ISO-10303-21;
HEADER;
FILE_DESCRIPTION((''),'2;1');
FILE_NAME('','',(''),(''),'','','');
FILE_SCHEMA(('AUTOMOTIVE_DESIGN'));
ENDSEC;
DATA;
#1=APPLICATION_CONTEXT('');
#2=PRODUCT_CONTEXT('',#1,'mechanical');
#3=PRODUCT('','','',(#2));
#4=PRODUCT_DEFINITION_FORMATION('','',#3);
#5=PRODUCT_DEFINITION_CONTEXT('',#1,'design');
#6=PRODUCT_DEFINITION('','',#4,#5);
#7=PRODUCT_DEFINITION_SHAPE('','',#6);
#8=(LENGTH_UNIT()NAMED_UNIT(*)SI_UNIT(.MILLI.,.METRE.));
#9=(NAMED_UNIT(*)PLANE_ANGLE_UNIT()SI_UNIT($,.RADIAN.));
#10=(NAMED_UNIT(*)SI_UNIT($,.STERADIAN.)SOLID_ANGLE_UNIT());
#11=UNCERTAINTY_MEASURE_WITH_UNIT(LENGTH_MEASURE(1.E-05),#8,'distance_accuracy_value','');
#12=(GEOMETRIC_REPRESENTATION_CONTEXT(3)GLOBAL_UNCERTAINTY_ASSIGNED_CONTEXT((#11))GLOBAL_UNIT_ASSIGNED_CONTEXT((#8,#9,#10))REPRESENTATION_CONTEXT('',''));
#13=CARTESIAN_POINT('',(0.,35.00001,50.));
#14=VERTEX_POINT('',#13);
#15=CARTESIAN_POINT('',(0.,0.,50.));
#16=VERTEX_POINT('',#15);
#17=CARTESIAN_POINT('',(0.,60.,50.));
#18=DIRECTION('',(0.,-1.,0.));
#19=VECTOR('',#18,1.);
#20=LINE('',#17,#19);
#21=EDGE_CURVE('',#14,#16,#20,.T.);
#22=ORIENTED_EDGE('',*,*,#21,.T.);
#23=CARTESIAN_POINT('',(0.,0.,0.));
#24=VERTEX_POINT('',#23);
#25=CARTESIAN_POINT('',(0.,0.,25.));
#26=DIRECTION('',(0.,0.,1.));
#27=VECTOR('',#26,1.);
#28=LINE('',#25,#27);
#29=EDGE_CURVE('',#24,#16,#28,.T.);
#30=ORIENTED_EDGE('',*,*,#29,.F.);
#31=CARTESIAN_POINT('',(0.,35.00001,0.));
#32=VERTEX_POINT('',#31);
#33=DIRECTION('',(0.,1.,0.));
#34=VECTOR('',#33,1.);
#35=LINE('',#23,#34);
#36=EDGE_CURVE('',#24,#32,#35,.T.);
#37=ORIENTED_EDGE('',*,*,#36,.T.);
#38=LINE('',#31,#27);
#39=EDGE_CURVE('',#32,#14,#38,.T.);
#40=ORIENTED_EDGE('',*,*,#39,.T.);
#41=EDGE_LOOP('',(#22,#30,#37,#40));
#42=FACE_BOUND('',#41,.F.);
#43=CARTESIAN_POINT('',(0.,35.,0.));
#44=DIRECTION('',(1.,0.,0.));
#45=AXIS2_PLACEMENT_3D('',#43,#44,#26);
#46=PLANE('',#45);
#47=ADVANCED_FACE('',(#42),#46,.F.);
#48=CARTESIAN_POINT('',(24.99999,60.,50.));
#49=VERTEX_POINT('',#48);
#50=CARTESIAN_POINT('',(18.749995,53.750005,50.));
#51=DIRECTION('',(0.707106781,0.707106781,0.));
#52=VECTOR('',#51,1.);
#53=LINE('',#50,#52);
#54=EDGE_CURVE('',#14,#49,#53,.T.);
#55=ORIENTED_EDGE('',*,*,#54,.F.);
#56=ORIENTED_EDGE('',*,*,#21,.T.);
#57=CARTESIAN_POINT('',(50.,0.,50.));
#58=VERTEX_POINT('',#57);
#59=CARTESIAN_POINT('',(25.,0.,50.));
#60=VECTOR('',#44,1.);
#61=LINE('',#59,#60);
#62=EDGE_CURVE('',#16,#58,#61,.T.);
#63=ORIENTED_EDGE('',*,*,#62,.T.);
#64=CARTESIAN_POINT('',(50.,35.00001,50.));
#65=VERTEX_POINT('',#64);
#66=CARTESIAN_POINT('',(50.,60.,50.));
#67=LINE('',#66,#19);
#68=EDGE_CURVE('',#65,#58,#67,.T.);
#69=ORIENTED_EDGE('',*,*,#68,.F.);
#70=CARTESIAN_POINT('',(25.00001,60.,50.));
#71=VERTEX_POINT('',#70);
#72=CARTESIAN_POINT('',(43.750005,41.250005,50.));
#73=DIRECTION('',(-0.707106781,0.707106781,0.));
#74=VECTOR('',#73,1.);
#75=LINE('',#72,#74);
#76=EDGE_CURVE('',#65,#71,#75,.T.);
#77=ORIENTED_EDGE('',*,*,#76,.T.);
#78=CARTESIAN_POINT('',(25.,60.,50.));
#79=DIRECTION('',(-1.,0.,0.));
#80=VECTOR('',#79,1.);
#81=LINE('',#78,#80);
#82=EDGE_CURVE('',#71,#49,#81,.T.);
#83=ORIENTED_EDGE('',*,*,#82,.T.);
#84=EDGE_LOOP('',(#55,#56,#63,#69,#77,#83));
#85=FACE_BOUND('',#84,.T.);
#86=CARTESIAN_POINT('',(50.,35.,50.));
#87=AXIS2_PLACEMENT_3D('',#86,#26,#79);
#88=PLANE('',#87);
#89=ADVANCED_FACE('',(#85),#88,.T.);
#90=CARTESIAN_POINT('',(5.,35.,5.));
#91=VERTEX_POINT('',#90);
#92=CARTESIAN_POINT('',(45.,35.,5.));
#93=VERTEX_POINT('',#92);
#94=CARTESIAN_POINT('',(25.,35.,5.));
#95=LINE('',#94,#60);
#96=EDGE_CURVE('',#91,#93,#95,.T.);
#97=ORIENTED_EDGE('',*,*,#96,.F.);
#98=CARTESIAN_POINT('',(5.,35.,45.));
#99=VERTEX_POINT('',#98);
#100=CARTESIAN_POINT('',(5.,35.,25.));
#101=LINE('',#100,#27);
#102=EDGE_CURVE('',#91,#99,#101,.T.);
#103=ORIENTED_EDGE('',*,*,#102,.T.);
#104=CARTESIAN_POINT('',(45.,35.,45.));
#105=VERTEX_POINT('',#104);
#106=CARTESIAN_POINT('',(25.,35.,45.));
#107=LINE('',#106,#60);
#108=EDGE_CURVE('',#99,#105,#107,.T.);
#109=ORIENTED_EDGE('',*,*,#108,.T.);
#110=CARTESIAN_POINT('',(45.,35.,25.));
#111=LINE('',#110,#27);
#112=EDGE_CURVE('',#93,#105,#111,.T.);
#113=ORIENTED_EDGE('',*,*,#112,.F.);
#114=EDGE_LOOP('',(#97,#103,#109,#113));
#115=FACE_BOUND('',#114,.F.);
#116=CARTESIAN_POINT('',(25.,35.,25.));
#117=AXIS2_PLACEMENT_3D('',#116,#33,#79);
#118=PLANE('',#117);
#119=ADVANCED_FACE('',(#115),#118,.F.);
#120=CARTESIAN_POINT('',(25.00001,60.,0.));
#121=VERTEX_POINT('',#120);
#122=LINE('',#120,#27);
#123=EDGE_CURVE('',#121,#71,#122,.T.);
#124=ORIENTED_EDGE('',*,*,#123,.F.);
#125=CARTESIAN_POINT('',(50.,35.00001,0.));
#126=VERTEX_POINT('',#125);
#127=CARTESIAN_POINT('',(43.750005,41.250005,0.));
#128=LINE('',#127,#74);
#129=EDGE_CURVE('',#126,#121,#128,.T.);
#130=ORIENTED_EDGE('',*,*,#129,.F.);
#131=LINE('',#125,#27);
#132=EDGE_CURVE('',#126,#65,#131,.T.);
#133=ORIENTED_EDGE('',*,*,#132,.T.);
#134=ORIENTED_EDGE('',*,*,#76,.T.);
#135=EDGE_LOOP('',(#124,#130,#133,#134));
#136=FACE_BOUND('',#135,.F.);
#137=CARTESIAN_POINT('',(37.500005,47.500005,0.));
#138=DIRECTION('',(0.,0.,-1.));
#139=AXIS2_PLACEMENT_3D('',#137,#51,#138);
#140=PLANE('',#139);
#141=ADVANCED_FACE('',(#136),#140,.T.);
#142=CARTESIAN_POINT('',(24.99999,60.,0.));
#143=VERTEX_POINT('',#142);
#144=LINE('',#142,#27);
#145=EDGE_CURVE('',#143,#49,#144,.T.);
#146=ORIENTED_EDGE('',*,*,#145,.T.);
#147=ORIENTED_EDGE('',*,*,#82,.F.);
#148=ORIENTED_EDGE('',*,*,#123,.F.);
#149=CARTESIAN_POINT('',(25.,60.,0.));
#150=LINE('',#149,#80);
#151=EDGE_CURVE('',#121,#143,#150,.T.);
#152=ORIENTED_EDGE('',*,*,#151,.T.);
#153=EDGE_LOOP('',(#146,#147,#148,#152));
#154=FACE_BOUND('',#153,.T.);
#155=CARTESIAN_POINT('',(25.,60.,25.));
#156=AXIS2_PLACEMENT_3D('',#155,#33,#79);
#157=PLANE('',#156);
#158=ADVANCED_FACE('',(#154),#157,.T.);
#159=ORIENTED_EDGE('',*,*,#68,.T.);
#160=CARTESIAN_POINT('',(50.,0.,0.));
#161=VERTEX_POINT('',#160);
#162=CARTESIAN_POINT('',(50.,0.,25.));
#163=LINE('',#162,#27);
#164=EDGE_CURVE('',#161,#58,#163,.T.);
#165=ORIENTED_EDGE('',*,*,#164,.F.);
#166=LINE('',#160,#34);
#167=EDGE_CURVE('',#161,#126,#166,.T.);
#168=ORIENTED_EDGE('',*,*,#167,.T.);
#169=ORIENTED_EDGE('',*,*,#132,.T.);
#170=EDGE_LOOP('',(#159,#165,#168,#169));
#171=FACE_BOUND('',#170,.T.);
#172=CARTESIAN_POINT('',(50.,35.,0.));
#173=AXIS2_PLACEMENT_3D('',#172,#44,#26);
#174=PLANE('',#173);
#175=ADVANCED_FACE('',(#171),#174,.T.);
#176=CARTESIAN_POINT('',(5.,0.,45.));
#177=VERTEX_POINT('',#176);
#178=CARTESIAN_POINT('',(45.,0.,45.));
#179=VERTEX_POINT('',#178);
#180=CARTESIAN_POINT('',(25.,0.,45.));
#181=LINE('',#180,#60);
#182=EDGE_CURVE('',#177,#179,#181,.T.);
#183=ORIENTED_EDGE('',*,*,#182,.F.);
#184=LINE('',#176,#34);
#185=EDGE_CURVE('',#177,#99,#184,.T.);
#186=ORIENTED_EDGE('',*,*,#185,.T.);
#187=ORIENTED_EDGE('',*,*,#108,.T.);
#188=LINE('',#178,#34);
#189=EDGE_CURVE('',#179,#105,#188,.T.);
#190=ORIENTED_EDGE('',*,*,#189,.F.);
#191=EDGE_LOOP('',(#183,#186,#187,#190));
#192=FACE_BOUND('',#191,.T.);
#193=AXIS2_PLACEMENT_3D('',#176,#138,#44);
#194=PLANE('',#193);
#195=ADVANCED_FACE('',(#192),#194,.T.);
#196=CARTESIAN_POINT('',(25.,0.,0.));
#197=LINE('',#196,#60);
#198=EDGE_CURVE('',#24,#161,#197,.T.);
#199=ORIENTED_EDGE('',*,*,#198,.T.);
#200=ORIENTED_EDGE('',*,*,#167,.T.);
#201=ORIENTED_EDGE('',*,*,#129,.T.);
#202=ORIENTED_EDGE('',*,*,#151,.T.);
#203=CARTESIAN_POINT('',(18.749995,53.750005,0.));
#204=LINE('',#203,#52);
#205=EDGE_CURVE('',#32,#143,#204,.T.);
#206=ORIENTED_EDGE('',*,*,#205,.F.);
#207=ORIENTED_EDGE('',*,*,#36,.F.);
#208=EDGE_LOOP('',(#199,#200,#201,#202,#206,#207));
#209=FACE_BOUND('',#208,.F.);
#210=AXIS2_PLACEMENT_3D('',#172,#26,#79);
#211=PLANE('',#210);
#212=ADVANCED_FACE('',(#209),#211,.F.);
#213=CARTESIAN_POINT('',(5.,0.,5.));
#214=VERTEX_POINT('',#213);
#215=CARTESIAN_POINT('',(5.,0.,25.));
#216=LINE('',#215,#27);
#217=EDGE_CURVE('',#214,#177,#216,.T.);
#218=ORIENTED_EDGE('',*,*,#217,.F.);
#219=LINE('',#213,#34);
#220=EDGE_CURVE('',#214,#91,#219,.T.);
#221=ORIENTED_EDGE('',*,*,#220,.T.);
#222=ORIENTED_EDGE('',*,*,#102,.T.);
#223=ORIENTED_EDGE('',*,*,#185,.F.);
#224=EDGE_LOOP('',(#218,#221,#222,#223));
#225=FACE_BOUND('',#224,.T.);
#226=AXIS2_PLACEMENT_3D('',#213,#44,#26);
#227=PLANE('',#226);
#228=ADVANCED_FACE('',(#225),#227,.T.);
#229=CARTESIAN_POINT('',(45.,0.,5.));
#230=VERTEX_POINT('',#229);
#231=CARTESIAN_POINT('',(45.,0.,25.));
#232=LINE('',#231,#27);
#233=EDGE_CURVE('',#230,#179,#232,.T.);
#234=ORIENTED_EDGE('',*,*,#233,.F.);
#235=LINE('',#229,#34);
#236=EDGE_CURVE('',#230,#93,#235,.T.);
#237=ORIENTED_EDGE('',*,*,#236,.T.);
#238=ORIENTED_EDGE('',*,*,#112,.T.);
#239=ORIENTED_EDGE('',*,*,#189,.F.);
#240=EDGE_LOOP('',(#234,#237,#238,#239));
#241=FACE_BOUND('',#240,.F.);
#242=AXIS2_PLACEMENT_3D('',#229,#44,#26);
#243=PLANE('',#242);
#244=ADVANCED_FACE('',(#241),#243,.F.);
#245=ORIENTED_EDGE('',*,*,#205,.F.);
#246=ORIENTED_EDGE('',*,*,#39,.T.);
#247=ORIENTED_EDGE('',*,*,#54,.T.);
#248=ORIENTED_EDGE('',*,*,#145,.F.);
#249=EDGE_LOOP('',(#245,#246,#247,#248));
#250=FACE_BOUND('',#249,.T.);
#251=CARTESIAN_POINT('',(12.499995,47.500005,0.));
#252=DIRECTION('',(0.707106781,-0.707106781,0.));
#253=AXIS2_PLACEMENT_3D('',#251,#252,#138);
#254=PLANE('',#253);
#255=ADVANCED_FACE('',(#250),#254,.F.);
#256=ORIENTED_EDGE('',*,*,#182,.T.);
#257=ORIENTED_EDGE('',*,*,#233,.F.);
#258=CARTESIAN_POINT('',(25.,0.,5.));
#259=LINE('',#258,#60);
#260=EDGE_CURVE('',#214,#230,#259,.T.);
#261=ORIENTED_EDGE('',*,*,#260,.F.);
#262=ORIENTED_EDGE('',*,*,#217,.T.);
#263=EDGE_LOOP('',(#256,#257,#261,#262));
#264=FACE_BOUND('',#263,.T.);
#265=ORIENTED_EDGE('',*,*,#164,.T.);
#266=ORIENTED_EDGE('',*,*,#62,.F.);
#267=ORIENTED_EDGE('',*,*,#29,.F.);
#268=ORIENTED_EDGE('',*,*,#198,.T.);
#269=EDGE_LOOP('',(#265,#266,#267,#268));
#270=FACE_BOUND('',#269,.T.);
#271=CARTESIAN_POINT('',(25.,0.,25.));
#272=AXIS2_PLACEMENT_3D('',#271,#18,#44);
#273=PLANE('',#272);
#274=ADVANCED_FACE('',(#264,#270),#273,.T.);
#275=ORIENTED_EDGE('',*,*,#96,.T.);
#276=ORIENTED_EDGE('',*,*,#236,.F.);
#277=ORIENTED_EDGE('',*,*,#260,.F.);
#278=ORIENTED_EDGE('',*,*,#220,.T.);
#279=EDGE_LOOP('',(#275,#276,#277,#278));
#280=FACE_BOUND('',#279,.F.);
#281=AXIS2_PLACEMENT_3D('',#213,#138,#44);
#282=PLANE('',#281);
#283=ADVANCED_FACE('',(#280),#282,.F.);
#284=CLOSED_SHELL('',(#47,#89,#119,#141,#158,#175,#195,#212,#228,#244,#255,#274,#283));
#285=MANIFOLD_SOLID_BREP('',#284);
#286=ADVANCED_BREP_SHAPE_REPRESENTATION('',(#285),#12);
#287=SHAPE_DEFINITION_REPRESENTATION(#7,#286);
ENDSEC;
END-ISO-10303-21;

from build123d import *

# Parameters (mm, degrees)
F0_W     = 50
F0_H     = 50
F0_W_2   = 40
F0_H_2   = 40
F1_DEPTH = 35
F2_W     = 50
F2_H     = 50
F3_DEPTH = 25
F4_SIZE  = 24.99999


# Not quite as in the source:
# - a fillet or chamfer is up to 0.001 mm smaller than in the source, because OpenCascade refuses the exact size


with BuildPart() as f1:
    # F0 (on Front) → F1 (new body)
    with BuildSketch(Plane.XZ):
        with Locations((25, 25)):
            Rectangle(F0_W, F0_H)
        with Locations((25, 25)):
            Rectangle(F0_W_2, F0_H_2, mode=Mode.SUBTRACT)
    extrude(amount=-F1_DEPTH)

    # F2 (on face) → F3 (join)
    with BuildSketch(Plane(origin=(0, 35, 0), x_dir=(-1, 0, 0), z_dir=(0, 1, 0))):
        with Locations((-25, 25)):
            Rectangle(F2_W, F2_H)
    extrude(amount=F3_DEPTH)

    # F4 (size 25 in the source; OpenCascade refuses exactly that, so slightly less here)
    f4_edges = [f1.edges().sort_by_distance(p)[0] for p in [
        (0, 60, 25),
        (50, 60, 25),
    ]]
    chamfer(f4_edges, length=F4_SIZE)


solid = f1.part
